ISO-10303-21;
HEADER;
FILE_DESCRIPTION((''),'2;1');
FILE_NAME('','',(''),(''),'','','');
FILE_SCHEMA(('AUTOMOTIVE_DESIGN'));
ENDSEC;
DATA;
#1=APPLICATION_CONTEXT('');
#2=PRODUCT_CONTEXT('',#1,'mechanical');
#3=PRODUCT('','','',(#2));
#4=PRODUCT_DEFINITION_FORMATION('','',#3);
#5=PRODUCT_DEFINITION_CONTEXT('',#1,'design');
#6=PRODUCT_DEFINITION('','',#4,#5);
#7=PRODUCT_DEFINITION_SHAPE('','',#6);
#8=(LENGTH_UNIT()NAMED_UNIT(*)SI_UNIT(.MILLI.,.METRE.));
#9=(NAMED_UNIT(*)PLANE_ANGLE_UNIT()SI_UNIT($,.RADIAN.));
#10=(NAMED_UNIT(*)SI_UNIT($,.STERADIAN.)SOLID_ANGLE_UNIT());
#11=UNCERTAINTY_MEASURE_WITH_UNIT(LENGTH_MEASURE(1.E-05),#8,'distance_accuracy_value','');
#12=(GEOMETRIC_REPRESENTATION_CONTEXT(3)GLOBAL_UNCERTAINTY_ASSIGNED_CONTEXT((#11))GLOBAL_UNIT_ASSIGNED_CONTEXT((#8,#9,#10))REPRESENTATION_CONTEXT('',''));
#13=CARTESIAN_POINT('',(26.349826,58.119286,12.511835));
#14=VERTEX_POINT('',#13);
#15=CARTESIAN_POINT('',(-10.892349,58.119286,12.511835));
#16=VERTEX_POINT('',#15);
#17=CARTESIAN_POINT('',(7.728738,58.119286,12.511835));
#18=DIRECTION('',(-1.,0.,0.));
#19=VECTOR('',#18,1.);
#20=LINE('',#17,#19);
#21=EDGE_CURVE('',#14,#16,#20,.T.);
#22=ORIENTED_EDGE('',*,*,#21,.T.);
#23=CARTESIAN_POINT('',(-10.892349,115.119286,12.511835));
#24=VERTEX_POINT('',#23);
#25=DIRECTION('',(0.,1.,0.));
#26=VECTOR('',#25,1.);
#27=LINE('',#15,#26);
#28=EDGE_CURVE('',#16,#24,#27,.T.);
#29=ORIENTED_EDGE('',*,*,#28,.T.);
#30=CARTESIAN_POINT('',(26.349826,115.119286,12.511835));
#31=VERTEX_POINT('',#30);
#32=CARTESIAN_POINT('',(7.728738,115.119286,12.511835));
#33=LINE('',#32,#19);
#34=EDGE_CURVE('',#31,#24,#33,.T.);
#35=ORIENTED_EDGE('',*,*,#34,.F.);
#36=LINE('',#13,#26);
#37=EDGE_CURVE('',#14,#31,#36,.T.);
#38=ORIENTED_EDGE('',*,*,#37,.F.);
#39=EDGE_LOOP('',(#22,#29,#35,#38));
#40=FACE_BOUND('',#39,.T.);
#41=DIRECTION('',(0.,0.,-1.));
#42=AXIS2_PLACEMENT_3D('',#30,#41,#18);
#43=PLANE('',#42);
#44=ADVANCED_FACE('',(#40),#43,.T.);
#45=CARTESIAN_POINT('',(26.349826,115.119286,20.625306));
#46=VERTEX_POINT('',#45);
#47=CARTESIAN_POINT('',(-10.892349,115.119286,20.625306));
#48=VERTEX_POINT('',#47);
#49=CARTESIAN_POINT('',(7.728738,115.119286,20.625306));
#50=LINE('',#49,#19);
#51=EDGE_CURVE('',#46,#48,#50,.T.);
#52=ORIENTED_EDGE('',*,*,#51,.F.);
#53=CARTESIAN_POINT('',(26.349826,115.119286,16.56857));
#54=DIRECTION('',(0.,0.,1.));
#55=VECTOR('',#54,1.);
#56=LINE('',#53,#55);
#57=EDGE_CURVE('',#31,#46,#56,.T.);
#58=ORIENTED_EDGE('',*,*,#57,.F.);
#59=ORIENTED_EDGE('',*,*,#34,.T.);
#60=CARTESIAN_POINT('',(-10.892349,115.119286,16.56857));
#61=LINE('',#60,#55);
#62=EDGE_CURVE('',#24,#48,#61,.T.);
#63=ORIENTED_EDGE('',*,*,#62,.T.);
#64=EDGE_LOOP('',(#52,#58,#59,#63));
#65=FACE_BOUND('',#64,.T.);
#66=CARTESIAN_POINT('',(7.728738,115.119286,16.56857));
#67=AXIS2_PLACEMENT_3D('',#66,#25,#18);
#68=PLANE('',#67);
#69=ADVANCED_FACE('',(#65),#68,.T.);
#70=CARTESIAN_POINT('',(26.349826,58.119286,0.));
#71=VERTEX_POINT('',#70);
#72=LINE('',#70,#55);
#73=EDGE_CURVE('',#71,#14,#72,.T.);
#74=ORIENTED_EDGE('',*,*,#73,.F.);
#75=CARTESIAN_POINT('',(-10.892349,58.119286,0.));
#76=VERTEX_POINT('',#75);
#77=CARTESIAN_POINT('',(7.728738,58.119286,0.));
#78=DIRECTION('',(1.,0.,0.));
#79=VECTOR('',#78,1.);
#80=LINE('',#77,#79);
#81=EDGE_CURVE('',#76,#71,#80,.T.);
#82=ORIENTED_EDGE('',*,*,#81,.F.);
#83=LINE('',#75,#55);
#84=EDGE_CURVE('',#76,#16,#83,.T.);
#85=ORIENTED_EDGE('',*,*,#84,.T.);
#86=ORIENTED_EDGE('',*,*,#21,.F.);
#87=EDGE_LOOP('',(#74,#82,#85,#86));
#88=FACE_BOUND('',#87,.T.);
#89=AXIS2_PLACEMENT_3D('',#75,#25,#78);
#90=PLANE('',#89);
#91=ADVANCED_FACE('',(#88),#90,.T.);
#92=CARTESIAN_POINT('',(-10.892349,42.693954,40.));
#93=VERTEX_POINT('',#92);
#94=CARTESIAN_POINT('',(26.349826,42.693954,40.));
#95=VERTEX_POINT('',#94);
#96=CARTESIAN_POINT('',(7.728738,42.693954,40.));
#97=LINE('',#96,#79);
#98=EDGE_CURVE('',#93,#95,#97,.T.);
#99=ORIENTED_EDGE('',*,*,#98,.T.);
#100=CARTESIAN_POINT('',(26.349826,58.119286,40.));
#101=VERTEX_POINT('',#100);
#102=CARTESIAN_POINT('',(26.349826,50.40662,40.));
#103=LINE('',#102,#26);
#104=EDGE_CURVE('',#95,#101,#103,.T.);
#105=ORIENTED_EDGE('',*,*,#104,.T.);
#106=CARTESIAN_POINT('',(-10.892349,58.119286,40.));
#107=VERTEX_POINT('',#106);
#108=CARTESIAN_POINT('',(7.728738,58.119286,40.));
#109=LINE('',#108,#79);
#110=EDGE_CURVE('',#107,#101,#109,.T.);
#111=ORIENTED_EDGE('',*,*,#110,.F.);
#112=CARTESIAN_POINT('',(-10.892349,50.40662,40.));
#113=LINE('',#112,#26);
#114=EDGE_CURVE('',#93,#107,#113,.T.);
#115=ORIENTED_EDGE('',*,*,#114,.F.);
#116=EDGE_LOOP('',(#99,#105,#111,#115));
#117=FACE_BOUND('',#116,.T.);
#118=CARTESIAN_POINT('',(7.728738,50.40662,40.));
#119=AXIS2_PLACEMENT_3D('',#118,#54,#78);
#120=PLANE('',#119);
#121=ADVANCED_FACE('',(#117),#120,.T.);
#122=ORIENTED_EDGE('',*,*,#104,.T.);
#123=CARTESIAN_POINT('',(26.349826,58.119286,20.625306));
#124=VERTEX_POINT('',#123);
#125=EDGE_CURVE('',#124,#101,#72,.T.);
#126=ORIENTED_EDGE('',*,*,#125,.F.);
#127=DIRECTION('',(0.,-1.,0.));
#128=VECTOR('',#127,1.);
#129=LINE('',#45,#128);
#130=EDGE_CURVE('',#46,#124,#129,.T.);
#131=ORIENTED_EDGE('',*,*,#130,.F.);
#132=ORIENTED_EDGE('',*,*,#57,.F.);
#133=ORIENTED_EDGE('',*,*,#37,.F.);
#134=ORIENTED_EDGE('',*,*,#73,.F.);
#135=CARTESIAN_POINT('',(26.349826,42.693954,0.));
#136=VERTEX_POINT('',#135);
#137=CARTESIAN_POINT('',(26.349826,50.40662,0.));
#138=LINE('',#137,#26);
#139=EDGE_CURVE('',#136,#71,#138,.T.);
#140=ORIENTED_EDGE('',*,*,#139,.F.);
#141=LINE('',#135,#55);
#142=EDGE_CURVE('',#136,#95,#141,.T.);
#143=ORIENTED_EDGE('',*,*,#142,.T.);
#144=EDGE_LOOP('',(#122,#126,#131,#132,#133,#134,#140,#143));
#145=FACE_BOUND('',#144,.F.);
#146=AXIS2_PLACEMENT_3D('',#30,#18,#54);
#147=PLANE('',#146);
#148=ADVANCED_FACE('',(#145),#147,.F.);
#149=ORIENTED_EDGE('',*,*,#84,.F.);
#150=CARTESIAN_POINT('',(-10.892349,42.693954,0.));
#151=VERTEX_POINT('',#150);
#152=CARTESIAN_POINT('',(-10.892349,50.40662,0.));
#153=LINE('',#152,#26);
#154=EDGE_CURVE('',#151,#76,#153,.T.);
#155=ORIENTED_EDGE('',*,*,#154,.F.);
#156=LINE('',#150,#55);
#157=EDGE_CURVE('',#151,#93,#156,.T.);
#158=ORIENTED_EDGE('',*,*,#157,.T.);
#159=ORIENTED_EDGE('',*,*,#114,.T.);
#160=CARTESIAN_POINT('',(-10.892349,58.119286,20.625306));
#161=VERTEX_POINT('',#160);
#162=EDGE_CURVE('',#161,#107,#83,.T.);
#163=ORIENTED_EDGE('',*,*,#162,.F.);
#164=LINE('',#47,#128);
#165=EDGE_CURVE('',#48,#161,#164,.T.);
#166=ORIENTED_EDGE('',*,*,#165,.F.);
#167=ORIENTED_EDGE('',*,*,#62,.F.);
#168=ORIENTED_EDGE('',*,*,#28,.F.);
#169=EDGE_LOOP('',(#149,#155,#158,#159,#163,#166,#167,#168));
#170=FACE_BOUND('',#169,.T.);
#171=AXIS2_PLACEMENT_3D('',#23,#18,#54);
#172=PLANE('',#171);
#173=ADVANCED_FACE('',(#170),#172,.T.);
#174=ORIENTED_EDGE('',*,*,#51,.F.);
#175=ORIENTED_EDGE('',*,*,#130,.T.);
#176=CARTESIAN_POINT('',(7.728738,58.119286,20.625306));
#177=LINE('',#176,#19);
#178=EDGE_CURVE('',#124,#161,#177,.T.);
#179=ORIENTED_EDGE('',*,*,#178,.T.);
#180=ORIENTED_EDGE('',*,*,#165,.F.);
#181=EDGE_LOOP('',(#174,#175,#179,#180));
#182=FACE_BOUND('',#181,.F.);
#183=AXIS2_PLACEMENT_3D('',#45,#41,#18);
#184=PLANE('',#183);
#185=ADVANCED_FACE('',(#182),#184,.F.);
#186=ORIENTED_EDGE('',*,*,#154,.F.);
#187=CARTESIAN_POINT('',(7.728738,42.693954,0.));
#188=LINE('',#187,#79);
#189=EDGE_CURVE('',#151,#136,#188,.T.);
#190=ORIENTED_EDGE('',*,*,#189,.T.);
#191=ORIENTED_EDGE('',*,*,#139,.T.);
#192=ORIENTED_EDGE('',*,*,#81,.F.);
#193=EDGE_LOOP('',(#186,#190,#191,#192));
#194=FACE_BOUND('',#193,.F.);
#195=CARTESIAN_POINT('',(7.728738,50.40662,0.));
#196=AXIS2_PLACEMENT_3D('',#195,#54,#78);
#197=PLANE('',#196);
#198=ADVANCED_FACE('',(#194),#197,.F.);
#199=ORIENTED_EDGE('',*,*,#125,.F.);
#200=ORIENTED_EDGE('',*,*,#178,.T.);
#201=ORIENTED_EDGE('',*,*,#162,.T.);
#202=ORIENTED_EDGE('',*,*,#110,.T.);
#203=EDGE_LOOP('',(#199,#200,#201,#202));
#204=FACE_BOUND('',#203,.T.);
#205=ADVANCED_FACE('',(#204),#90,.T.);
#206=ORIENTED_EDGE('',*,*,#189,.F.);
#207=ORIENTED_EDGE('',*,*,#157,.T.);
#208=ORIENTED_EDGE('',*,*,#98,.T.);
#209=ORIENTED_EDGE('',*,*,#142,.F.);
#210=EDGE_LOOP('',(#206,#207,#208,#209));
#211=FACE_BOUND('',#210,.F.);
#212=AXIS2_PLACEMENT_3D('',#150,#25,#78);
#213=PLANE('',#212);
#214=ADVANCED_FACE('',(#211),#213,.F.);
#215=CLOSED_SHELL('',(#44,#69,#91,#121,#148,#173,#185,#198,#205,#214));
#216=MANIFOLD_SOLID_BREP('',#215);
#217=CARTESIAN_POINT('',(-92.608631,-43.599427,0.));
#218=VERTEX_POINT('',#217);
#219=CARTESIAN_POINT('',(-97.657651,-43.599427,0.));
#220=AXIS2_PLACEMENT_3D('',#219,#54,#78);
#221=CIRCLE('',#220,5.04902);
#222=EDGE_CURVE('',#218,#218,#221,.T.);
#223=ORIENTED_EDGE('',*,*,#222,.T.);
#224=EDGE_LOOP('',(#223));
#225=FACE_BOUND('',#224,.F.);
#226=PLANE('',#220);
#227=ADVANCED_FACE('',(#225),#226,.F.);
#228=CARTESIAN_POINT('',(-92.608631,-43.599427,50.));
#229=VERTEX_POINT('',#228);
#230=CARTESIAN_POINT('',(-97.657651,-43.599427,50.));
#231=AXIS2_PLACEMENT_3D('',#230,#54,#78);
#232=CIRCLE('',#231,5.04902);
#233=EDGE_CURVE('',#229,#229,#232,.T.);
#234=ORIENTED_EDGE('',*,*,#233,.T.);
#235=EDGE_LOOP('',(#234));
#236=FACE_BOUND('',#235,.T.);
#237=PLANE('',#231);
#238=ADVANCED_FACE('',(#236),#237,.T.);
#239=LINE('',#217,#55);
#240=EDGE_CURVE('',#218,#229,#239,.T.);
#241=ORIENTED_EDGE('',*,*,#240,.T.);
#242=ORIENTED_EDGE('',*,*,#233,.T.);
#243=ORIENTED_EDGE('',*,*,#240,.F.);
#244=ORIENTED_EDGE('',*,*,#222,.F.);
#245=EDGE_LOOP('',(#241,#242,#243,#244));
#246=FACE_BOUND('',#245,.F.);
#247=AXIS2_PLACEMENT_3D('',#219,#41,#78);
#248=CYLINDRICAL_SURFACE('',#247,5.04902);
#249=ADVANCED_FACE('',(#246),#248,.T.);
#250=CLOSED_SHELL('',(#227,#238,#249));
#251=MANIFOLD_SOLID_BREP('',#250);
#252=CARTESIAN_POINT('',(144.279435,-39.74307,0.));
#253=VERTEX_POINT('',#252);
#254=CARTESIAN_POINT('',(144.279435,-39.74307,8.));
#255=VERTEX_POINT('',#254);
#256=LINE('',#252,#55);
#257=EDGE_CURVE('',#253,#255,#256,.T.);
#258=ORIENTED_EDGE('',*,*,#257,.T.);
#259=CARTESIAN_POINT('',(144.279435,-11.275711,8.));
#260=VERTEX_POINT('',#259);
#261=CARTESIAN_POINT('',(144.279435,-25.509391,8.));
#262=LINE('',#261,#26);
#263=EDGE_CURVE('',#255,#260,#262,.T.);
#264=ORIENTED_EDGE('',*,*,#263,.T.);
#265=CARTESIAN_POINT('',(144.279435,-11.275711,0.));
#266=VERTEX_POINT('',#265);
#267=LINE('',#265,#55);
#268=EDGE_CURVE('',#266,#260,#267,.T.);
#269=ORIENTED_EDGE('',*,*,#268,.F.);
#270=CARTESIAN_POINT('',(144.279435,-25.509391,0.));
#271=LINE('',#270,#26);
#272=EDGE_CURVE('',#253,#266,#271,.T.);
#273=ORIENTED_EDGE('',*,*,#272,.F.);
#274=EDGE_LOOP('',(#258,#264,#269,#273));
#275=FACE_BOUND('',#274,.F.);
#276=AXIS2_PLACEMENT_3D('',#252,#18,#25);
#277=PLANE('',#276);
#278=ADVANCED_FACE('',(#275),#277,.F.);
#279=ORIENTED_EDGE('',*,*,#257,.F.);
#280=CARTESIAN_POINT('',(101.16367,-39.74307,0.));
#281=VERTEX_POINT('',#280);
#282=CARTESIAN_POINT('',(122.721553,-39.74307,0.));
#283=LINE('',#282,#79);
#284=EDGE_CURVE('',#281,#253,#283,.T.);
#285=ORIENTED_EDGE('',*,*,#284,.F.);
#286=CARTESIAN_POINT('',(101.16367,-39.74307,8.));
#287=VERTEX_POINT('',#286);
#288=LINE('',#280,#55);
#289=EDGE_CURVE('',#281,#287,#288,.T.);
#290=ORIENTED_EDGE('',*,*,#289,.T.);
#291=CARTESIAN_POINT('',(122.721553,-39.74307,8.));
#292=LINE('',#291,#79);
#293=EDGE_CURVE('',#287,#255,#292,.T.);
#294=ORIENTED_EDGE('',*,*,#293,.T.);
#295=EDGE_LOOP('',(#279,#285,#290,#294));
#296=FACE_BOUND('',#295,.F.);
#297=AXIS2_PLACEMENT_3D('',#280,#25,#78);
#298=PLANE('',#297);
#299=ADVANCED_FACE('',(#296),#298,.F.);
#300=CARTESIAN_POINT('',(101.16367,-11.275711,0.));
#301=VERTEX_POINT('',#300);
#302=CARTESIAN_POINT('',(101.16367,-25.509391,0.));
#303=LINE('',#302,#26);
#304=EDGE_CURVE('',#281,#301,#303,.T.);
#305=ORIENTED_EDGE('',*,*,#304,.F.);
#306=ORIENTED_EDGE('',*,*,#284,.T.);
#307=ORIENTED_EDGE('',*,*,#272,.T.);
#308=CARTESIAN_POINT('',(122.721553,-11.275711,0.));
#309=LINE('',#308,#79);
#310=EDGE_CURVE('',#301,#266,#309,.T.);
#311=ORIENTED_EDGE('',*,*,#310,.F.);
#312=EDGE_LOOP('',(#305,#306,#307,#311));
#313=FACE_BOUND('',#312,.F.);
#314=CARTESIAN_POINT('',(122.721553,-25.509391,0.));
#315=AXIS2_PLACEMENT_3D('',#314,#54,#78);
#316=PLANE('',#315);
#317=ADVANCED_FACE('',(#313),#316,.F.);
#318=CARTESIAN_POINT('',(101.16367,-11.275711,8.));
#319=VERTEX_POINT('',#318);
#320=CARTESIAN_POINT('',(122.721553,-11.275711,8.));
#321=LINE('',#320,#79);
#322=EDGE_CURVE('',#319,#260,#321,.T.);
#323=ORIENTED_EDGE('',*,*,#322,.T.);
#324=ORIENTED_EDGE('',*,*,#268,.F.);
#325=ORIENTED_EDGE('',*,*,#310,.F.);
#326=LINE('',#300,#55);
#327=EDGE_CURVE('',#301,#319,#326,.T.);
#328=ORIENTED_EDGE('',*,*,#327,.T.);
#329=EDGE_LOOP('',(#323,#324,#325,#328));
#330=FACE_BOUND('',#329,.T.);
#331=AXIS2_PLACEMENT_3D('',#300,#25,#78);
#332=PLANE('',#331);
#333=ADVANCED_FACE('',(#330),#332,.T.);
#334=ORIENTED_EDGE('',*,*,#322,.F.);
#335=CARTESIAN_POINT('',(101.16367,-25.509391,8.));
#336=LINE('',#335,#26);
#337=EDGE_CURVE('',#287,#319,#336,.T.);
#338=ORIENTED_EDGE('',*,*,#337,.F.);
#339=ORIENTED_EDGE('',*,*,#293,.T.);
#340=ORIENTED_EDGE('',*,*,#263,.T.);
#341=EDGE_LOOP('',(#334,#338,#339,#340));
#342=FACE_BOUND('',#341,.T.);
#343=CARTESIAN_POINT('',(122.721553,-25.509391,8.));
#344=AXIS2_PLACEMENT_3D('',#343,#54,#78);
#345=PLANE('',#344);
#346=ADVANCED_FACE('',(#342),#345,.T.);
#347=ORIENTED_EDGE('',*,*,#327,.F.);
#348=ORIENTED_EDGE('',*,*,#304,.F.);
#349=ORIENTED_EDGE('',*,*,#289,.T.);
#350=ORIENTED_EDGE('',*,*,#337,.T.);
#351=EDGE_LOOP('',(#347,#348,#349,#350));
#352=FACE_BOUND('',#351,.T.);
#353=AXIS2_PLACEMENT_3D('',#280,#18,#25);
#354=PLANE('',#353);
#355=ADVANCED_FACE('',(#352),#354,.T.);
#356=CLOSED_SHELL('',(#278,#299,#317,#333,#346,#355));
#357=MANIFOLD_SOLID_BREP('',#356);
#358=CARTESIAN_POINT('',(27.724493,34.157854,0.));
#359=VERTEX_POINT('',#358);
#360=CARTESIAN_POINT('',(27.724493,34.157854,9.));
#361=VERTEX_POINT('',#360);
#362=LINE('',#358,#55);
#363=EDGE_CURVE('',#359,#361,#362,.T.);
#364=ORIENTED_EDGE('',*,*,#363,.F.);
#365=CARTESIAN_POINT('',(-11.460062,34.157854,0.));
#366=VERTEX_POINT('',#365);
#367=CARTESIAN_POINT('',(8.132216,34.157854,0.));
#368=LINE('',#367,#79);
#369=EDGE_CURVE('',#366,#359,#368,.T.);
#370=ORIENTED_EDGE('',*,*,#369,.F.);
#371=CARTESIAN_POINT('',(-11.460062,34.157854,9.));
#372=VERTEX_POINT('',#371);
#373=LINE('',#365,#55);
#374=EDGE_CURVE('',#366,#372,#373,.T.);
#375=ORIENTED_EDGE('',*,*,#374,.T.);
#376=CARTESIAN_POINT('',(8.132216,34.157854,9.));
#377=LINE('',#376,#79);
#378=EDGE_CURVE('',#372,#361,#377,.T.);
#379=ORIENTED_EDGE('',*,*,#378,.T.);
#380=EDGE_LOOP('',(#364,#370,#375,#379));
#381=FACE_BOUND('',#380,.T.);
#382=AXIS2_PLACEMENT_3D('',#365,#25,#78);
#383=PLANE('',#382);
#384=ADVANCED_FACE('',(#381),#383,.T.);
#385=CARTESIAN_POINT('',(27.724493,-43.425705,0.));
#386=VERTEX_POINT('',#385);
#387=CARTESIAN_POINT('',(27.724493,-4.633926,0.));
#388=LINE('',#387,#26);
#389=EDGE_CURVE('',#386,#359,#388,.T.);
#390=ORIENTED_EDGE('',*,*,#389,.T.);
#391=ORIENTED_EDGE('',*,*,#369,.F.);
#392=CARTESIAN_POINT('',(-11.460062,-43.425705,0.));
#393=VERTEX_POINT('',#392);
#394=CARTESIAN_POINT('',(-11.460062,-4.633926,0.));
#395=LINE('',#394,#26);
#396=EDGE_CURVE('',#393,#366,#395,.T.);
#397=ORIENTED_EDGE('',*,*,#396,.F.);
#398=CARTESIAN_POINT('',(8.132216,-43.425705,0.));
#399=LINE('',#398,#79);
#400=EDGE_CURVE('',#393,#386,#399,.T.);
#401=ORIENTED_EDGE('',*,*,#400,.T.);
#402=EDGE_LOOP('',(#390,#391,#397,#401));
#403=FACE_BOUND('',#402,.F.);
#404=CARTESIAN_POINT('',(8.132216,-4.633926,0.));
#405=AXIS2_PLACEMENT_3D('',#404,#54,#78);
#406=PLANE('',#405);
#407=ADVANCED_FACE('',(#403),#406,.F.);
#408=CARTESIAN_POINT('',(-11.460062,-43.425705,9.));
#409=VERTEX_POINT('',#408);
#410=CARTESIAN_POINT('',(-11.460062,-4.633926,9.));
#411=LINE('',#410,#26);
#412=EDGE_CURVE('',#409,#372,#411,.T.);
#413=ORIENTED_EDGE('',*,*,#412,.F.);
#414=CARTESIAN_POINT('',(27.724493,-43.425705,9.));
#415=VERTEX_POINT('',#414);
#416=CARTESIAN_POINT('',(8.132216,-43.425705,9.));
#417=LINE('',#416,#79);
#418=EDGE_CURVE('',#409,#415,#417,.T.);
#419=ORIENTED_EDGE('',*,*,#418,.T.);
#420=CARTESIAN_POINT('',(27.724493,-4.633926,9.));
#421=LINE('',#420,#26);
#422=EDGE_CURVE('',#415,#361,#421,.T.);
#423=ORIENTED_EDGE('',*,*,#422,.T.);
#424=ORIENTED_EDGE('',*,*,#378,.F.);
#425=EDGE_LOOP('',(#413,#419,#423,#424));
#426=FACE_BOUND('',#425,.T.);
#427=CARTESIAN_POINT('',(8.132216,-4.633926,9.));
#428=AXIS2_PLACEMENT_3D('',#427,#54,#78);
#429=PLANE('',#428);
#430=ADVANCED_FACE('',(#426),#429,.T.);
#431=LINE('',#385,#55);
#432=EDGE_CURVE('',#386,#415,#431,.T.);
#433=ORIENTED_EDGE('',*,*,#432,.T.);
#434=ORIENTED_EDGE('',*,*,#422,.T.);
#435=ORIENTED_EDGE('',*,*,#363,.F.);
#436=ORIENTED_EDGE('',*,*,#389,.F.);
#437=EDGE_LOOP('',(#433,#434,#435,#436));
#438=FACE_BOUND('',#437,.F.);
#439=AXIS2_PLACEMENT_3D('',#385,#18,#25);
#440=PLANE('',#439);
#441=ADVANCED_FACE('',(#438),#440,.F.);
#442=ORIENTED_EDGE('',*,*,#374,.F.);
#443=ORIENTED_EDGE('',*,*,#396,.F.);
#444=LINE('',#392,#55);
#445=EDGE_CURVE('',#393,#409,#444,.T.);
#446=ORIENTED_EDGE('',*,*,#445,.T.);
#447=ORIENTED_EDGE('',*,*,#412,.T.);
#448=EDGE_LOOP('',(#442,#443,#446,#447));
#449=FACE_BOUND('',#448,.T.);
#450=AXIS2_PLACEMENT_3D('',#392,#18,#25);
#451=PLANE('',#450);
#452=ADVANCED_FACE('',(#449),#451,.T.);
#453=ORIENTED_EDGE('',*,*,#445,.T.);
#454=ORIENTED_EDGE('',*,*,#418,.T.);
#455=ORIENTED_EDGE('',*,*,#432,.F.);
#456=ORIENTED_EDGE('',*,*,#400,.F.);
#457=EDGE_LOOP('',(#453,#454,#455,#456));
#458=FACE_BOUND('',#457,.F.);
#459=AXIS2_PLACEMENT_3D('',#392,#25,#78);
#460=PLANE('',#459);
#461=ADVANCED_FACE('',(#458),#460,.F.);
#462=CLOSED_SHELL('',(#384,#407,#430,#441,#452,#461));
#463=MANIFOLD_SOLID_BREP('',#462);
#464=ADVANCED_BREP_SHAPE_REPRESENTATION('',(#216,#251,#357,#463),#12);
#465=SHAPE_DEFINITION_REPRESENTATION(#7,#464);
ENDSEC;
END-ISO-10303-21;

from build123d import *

# Parameters (mm, degrees)
F2_W      = 39.1845554113
F2_H      = 77.5835588574
F3_DEPTH  = 9
F4_W      = 37.2421750799
F4_H      = 15.4253318906
F5_DEPTH  = 40
F6_W      = 37.2421750799
F6_H      = 8.1134717911
F7_DEPTH  = 16
F8_DEPTH  = 25
F9_DEPTH  = 15
F10_DEPTH = 1
F11_DEPTH = 20
F12_R     = 5.0490195459
F13_DEPTH = 50
F14_W     = 43.1157648563
F14_H     = 28.46735809
F15_DEPTH = 8


# Not quite as in the source:
# - the program builds the solid bodies; features that only make, move or delete a surface that nothing else refers to are left out


with BuildPart() as f3:
    # F2 (on Top) → F3 (new body)
    with BuildSketch(Plane.XY):
        with Locations((8.1322155893, -4.6339258552)):
            Rectangle(F2_W, F2_H)
    extrude(amount=F3_DEPTH)


with BuildPart() as f5:
    # F4 (on Top) → F5 (new body)
    with BuildSketch(Plane.XY):
        with Locations((7.7287382446, 50.4066199064)):
            Rectangle(F4_W, F4_H)
    extrude(amount=F5_DEPTH)

    # F6 (on face) → F7 (join)
    with BuildSketch(Plane(origin=(0, 58.1192858517, 0), x_dir=(-1, 0, 0), z_dir=(0, 1, 0))):
        with Locations((-7.7287382446, 16.5685703978)):
            Rectangle(F6_W, F6_H)
    extrude(amount=F7_DEPTH)

    # F8 (add): a face of the model
    f8_faces = [f5.faces().sort_by_distance(p)[0] for p in [
        (7.7287382446, 74.1192858517, 16.5685703978),
    ]]
    extrude(f8_faces, amount=F8_DEPTH)

    # F9 (add): a face of the model
    f9_faces = [f5.faces().sort_by_distance(p)[0] for p in [
        (7.7287382446, 99.1192858517, 16.5685703978),
    ]]
    extrude(f9_faces, amount=F9_DEPTH)

    # F10 (add): a face of the model
    f10_faces = [f5.faces().sort_by_distance(p)[0] for p in [
        (7.7287382446, 114.1192858517, 16.5685703978),
    ]]
    extrude(f10_faces, amount=F10_DEPTH)

    # F11 (add): a face of the model
    f11_faces = [f5.faces().sort_by_distance(p)[0] for p in [
        (7.7287382446, 115.1192858517, 16.5685703978),
    ]]
    extrude(f11_faces, amount=-F11_DEPTH)


with BuildPart() as f13:
    # F12 (on Top) → F13 (new body)
    with BuildSketch(Plane.XY):
        with Locations((-97.6576507092, -43.5994267464)):
            Circle(F12_R)
    extrude(amount=F13_DEPTH)


with BuildPart() as f15:
    # F14 (on Top) → F15 (new body)
    with BuildSketch(Plane.XY):
        with Locations((122.7215528488, -25.5093905143)):
            Rectangle(F14_W, F14_H)
    extrude(amount=F15_DEPTH)


solid = Compound([f3.part, f5.part, f13.part, f15.part])
